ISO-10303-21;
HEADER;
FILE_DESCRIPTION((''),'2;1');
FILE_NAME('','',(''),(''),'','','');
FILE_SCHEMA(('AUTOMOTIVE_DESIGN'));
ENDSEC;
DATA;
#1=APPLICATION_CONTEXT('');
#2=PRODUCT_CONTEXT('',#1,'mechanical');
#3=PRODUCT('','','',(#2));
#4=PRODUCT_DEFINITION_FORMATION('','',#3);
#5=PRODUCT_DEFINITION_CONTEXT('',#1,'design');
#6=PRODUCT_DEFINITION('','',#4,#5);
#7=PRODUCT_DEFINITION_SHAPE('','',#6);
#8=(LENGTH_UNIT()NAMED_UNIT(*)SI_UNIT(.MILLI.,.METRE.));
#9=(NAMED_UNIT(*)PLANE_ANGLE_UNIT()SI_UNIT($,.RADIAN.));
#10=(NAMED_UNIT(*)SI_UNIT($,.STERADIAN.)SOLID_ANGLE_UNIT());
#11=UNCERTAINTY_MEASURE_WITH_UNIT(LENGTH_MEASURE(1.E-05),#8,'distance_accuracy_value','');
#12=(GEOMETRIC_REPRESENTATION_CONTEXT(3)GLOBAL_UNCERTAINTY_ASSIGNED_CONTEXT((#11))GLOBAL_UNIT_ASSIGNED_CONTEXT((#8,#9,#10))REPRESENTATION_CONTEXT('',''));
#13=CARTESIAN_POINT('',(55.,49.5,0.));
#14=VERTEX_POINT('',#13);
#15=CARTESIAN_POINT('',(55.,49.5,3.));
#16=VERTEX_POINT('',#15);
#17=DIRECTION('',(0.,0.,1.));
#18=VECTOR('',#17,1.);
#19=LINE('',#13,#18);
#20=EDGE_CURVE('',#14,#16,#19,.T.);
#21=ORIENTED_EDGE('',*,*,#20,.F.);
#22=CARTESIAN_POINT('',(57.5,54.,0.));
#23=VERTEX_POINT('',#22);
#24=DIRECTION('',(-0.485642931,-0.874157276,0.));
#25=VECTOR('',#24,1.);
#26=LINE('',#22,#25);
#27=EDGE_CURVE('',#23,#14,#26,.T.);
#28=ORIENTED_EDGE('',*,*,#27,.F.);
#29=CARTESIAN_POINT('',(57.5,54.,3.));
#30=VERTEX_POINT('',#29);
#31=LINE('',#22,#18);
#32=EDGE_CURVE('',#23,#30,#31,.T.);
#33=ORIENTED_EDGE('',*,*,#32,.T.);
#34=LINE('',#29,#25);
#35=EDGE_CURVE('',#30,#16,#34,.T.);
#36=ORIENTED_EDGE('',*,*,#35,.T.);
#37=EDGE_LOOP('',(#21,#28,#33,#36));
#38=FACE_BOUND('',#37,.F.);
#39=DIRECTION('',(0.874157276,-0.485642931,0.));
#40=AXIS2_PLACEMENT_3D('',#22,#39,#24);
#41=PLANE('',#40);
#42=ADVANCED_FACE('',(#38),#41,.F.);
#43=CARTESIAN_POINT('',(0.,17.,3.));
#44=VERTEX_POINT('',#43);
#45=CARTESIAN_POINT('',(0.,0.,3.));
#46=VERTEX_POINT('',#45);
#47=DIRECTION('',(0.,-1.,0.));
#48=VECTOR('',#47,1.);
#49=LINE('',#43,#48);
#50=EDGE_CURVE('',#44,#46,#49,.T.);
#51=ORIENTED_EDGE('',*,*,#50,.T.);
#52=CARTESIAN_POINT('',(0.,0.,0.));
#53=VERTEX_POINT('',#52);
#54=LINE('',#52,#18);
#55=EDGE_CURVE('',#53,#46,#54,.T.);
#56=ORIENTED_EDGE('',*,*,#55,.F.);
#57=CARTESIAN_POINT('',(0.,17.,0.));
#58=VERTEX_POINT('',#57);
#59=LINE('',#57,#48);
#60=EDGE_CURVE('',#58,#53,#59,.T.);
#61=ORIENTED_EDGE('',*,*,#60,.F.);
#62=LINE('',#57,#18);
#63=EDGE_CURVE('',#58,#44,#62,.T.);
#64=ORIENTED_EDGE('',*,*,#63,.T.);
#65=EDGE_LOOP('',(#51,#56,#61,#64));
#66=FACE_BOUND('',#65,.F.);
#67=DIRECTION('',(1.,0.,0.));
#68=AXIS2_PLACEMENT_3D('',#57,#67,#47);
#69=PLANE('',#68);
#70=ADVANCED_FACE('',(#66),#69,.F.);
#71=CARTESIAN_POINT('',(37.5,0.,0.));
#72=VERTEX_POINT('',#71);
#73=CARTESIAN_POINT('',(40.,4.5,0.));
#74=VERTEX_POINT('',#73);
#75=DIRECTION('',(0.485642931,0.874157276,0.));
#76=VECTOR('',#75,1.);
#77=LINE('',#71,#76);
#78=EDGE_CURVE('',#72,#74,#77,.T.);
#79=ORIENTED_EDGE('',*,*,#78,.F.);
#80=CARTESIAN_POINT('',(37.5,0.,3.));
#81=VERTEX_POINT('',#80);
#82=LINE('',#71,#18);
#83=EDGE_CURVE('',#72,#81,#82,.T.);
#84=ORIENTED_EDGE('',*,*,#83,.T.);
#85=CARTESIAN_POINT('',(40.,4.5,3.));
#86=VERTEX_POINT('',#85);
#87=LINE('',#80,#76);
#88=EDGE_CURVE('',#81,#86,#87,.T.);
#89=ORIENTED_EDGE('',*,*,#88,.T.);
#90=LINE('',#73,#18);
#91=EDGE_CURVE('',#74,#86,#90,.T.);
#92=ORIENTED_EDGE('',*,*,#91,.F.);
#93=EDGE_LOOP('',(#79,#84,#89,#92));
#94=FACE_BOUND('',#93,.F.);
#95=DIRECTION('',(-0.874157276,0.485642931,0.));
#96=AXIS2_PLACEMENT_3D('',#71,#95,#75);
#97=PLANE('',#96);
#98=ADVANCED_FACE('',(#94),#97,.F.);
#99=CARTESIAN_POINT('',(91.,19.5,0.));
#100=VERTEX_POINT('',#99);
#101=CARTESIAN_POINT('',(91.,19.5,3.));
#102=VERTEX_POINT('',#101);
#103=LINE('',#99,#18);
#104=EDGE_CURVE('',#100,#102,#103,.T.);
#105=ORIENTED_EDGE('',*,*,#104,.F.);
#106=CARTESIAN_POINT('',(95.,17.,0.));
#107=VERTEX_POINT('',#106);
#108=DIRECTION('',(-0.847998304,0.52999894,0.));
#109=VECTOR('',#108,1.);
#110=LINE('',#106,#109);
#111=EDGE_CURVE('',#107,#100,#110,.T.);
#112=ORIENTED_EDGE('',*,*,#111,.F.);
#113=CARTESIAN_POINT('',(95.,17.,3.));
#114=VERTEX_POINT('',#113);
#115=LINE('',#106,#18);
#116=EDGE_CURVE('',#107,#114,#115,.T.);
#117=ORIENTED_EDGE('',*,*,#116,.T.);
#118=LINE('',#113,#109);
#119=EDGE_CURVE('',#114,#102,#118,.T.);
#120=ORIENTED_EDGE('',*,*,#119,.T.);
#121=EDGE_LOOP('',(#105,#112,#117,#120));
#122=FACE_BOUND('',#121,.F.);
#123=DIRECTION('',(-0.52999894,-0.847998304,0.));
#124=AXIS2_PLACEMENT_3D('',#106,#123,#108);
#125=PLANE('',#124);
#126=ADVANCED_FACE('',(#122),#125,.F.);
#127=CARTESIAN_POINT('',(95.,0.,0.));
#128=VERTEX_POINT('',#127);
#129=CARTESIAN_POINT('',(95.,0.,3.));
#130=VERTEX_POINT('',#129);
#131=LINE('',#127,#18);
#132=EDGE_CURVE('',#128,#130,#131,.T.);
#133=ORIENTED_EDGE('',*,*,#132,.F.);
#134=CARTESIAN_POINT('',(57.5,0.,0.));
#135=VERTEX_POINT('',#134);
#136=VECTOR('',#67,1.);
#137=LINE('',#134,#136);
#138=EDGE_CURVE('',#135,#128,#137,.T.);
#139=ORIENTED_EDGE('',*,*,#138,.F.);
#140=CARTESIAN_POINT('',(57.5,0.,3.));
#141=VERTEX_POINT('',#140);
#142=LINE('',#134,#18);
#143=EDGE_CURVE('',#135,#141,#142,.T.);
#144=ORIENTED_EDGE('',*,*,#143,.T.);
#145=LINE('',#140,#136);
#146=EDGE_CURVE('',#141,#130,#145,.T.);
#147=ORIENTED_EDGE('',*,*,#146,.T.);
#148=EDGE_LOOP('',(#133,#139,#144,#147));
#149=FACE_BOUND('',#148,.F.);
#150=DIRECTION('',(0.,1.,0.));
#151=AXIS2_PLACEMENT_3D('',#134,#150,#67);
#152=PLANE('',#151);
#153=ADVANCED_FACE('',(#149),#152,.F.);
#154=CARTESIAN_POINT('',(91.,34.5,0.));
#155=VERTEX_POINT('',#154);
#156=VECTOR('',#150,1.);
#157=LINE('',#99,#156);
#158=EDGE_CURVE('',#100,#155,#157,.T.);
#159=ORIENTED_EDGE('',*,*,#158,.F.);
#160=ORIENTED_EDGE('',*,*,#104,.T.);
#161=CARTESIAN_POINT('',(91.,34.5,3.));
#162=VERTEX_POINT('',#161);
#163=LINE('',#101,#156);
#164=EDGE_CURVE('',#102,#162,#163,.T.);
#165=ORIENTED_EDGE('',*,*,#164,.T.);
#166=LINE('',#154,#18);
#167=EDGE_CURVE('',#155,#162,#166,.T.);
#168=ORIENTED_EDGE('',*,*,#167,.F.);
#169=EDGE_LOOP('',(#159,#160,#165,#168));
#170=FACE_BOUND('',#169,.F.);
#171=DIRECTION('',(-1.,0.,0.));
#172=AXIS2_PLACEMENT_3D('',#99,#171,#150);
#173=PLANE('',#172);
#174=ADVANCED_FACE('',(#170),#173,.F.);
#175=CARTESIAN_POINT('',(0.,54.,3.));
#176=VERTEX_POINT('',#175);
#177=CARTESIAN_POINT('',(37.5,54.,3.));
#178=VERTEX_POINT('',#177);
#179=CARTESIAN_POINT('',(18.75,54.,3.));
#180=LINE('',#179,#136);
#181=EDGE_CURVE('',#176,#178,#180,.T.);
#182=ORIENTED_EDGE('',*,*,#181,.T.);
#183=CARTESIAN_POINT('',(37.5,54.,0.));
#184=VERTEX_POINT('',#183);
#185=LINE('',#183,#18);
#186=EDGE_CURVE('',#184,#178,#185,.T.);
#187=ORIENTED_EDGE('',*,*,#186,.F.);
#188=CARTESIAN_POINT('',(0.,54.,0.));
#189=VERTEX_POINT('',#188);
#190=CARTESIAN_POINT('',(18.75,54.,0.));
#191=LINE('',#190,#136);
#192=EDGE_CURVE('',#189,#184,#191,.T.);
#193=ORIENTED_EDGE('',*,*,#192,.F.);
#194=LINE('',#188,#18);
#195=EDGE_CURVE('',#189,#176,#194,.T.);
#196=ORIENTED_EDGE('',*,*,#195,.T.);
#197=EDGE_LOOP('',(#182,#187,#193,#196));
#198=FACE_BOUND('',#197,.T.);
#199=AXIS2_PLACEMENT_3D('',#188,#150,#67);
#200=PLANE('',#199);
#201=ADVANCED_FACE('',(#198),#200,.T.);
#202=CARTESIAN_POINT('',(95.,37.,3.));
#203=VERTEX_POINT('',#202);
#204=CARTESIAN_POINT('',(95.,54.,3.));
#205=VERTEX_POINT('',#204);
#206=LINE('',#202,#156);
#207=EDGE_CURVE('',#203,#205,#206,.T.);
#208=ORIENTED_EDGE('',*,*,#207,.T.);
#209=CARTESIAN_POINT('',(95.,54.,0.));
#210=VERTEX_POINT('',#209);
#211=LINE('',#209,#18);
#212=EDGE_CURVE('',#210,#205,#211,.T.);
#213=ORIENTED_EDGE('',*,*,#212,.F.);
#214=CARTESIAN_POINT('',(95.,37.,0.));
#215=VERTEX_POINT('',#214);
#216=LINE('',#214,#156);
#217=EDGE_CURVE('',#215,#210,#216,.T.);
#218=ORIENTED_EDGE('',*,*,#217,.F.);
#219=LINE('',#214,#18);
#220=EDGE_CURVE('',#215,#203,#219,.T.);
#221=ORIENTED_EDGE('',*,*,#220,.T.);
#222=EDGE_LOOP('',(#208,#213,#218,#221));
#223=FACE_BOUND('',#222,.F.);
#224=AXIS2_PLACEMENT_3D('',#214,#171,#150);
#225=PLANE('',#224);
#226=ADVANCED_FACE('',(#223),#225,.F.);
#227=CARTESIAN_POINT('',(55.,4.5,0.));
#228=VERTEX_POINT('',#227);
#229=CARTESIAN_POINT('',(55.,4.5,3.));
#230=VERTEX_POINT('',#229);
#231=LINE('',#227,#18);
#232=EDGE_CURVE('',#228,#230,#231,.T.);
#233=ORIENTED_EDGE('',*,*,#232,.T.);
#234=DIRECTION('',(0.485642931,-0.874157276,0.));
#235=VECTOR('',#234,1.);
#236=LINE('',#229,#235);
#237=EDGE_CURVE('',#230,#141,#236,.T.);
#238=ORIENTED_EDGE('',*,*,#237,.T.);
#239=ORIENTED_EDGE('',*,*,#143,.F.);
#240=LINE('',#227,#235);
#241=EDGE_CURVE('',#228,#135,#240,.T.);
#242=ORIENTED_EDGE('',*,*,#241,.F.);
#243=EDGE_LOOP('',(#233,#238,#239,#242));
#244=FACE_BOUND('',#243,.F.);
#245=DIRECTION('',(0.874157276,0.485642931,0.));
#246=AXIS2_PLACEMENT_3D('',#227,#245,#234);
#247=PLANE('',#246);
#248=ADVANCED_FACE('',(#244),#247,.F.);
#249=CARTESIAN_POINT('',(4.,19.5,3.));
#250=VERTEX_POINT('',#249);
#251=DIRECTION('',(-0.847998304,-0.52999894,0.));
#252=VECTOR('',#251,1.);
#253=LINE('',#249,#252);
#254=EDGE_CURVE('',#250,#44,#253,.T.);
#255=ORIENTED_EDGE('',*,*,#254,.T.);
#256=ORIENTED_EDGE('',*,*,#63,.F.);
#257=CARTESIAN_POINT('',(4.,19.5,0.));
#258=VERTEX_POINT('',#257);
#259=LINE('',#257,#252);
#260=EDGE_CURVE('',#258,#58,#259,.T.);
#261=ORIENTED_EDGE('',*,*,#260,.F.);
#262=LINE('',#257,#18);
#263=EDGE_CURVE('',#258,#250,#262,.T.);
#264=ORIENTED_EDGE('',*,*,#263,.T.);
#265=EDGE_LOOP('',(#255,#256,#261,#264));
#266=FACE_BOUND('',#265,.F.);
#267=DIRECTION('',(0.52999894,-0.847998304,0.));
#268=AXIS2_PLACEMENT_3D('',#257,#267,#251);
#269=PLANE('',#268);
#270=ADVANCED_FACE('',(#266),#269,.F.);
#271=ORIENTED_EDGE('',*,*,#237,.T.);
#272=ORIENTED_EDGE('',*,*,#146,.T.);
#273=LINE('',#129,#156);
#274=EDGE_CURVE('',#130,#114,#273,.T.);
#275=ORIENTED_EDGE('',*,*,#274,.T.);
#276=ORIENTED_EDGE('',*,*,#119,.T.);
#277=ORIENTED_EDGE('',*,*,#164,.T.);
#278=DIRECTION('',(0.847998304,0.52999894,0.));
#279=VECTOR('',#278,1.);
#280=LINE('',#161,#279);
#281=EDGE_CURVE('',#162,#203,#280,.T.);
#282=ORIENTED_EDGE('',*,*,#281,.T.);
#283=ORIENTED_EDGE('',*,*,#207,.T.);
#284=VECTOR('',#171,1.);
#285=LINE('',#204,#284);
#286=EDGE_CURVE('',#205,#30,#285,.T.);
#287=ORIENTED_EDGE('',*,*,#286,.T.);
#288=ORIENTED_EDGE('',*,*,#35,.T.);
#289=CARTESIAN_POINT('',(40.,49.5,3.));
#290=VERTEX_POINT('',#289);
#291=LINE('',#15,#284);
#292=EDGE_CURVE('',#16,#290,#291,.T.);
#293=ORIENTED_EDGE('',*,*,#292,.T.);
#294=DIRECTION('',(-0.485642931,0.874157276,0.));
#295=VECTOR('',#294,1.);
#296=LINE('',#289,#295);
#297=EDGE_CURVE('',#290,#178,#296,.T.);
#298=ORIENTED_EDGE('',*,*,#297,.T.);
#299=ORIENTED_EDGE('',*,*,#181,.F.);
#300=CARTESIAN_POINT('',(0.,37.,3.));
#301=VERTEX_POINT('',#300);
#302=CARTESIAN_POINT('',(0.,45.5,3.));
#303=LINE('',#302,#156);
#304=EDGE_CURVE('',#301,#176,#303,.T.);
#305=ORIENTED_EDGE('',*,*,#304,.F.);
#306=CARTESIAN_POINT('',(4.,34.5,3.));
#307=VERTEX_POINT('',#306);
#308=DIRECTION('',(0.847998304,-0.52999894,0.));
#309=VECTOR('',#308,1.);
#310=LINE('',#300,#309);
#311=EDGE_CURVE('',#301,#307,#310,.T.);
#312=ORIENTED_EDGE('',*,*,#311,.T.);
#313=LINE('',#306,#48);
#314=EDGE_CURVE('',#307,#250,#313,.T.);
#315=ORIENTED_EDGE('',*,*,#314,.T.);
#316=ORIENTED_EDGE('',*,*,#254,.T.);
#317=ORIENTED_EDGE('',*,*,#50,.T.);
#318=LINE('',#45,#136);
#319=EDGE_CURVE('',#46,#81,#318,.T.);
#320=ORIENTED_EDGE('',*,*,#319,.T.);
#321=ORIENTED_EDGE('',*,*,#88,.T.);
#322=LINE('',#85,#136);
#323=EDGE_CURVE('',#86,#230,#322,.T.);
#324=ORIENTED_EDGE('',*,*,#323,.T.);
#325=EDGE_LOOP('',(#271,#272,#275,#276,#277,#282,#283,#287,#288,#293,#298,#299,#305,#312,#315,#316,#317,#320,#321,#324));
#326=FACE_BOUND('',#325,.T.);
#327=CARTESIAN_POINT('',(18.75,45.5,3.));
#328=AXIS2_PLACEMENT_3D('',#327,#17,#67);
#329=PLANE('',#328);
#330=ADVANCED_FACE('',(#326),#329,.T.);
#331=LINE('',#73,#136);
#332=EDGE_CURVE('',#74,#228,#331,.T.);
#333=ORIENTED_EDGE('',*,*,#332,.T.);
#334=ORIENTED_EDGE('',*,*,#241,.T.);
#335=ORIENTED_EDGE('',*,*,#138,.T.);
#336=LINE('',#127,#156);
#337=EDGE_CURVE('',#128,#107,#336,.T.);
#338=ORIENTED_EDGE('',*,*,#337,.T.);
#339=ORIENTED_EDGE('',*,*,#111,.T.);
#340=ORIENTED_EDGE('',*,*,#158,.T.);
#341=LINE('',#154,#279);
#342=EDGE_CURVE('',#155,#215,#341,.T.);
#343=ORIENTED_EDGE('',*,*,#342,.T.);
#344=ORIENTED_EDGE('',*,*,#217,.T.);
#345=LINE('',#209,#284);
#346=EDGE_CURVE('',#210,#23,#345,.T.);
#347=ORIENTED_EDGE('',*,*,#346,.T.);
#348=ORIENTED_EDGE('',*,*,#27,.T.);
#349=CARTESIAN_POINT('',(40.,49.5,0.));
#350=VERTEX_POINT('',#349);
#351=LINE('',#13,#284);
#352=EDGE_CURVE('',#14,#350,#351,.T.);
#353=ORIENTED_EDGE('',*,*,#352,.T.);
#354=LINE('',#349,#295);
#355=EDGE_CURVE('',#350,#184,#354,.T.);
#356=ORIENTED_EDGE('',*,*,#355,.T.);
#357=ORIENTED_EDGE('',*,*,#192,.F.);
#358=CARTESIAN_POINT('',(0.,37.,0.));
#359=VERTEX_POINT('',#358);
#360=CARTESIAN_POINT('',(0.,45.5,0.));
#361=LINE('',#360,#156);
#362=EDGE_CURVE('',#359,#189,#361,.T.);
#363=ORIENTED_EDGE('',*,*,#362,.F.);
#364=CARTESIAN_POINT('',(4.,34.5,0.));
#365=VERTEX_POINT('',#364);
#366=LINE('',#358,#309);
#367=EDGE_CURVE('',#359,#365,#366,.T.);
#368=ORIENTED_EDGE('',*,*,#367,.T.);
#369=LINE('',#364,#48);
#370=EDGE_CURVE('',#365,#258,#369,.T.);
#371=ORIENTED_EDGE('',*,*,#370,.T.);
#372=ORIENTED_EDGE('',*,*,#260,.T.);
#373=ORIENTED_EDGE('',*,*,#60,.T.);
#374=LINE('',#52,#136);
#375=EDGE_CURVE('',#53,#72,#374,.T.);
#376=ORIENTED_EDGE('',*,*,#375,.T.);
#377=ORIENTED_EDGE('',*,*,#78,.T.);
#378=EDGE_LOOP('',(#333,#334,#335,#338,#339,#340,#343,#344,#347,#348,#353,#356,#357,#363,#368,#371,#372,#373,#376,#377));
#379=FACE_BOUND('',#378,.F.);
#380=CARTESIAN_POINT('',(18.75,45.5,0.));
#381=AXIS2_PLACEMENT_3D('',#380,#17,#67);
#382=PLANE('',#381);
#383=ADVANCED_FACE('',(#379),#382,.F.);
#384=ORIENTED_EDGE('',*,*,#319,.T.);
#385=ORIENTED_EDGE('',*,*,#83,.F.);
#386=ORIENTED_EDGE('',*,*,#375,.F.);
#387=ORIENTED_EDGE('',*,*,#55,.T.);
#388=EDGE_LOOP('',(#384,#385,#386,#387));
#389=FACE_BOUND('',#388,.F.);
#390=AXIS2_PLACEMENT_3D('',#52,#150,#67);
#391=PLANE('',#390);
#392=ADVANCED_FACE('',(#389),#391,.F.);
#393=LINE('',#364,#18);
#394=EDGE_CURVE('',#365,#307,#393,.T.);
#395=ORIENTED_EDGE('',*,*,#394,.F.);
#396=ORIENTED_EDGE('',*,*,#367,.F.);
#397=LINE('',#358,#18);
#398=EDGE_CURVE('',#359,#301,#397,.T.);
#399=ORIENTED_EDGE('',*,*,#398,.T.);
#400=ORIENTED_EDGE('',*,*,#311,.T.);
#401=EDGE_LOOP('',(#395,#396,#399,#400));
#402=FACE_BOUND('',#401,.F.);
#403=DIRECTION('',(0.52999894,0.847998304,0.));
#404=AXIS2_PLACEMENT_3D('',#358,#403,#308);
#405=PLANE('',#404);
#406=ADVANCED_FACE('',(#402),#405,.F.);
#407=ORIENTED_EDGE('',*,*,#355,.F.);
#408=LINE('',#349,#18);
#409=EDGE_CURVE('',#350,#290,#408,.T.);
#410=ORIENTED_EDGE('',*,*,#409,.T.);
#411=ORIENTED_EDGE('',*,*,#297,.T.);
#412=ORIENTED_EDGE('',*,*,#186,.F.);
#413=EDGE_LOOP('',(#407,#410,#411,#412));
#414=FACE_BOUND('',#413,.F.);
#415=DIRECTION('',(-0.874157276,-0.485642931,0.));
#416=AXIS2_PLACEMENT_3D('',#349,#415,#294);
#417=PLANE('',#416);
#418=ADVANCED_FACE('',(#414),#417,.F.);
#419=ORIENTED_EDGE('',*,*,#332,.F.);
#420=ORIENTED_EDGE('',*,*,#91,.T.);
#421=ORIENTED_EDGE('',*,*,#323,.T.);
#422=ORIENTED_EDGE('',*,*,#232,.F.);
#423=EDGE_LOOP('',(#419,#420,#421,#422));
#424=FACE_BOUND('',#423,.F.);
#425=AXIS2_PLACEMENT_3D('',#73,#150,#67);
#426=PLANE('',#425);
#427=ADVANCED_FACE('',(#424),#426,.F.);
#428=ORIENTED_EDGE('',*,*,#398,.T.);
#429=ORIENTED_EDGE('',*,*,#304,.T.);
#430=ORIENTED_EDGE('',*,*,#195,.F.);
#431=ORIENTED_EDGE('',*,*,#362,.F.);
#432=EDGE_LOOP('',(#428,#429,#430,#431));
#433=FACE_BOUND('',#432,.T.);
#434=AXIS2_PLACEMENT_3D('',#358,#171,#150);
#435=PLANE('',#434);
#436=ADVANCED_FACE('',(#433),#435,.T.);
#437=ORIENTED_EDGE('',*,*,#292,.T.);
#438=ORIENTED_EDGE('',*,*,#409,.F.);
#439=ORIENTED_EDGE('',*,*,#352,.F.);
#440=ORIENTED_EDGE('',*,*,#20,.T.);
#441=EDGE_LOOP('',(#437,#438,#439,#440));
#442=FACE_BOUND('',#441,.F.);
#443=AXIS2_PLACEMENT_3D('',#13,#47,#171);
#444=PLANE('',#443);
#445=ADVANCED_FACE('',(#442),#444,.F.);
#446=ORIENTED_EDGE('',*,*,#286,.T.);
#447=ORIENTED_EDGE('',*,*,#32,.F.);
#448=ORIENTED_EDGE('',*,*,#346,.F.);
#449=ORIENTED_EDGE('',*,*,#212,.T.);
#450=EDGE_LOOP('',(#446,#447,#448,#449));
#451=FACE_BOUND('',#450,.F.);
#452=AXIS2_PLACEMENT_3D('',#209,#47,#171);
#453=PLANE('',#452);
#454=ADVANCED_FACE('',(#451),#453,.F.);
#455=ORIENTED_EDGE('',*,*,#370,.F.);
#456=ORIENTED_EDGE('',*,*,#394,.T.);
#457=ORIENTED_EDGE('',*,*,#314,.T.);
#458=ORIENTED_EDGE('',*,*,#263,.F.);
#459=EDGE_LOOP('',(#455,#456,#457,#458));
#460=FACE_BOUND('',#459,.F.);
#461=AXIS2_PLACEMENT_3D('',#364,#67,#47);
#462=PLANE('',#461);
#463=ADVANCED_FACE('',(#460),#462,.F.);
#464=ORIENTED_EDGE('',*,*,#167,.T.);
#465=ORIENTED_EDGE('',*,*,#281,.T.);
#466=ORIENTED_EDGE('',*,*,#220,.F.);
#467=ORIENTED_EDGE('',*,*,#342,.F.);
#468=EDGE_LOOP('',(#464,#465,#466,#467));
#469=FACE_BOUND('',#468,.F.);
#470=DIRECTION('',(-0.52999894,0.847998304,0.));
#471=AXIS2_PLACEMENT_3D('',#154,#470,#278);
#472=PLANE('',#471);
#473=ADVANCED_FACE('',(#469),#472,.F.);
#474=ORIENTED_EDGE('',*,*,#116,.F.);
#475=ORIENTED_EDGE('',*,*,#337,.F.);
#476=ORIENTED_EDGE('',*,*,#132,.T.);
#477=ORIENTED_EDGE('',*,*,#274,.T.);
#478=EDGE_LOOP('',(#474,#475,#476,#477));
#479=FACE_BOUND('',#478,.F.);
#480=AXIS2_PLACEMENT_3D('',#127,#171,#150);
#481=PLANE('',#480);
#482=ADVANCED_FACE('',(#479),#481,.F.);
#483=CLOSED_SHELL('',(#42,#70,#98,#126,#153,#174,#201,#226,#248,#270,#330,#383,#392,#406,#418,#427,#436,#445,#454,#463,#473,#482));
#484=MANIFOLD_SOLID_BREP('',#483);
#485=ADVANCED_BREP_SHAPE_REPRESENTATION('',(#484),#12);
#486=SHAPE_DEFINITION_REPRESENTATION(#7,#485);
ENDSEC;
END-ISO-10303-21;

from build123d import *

# Parameters (mm, degrees)
F0_W     = 37.5
F0_H     = 17
F1_DEPTH = 3


# Not quite as in the source:
# - a feature names something its author has since deleted; it is built from what else it names


with BuildPart() as f1:
    # F0 (on Top) → F1 (new body)
    with BuildSketch(Plane.XY):
        with Locations((18.75, 45.5)):
            Rectangle(F0_W, F0_H)
        Polygon((95, 37), (37.5, 37), (37.5, 0), (40, 4.5), (47.5, 4.5), (55, 4.5), (57.5, 0), (95, 0), (95, 17), (91, 19.5), (91, 27), (91, 34.5), align=None)
        Polygon((40, 49.5), (37.5, 54), (37.5, 37), (95, 37), (95, 54), (57.5, 54), (55, 49.5), (47.5, 49.5), align=None)
        Polygon((37.5, 37), (0, 37), (4, 34.5), (4, 27), (4, 19.5), (0, 17), (0, 0), (37.5, 0), align=None)
    extrude(amount=F1_DEPTH)


solid = f1.part
